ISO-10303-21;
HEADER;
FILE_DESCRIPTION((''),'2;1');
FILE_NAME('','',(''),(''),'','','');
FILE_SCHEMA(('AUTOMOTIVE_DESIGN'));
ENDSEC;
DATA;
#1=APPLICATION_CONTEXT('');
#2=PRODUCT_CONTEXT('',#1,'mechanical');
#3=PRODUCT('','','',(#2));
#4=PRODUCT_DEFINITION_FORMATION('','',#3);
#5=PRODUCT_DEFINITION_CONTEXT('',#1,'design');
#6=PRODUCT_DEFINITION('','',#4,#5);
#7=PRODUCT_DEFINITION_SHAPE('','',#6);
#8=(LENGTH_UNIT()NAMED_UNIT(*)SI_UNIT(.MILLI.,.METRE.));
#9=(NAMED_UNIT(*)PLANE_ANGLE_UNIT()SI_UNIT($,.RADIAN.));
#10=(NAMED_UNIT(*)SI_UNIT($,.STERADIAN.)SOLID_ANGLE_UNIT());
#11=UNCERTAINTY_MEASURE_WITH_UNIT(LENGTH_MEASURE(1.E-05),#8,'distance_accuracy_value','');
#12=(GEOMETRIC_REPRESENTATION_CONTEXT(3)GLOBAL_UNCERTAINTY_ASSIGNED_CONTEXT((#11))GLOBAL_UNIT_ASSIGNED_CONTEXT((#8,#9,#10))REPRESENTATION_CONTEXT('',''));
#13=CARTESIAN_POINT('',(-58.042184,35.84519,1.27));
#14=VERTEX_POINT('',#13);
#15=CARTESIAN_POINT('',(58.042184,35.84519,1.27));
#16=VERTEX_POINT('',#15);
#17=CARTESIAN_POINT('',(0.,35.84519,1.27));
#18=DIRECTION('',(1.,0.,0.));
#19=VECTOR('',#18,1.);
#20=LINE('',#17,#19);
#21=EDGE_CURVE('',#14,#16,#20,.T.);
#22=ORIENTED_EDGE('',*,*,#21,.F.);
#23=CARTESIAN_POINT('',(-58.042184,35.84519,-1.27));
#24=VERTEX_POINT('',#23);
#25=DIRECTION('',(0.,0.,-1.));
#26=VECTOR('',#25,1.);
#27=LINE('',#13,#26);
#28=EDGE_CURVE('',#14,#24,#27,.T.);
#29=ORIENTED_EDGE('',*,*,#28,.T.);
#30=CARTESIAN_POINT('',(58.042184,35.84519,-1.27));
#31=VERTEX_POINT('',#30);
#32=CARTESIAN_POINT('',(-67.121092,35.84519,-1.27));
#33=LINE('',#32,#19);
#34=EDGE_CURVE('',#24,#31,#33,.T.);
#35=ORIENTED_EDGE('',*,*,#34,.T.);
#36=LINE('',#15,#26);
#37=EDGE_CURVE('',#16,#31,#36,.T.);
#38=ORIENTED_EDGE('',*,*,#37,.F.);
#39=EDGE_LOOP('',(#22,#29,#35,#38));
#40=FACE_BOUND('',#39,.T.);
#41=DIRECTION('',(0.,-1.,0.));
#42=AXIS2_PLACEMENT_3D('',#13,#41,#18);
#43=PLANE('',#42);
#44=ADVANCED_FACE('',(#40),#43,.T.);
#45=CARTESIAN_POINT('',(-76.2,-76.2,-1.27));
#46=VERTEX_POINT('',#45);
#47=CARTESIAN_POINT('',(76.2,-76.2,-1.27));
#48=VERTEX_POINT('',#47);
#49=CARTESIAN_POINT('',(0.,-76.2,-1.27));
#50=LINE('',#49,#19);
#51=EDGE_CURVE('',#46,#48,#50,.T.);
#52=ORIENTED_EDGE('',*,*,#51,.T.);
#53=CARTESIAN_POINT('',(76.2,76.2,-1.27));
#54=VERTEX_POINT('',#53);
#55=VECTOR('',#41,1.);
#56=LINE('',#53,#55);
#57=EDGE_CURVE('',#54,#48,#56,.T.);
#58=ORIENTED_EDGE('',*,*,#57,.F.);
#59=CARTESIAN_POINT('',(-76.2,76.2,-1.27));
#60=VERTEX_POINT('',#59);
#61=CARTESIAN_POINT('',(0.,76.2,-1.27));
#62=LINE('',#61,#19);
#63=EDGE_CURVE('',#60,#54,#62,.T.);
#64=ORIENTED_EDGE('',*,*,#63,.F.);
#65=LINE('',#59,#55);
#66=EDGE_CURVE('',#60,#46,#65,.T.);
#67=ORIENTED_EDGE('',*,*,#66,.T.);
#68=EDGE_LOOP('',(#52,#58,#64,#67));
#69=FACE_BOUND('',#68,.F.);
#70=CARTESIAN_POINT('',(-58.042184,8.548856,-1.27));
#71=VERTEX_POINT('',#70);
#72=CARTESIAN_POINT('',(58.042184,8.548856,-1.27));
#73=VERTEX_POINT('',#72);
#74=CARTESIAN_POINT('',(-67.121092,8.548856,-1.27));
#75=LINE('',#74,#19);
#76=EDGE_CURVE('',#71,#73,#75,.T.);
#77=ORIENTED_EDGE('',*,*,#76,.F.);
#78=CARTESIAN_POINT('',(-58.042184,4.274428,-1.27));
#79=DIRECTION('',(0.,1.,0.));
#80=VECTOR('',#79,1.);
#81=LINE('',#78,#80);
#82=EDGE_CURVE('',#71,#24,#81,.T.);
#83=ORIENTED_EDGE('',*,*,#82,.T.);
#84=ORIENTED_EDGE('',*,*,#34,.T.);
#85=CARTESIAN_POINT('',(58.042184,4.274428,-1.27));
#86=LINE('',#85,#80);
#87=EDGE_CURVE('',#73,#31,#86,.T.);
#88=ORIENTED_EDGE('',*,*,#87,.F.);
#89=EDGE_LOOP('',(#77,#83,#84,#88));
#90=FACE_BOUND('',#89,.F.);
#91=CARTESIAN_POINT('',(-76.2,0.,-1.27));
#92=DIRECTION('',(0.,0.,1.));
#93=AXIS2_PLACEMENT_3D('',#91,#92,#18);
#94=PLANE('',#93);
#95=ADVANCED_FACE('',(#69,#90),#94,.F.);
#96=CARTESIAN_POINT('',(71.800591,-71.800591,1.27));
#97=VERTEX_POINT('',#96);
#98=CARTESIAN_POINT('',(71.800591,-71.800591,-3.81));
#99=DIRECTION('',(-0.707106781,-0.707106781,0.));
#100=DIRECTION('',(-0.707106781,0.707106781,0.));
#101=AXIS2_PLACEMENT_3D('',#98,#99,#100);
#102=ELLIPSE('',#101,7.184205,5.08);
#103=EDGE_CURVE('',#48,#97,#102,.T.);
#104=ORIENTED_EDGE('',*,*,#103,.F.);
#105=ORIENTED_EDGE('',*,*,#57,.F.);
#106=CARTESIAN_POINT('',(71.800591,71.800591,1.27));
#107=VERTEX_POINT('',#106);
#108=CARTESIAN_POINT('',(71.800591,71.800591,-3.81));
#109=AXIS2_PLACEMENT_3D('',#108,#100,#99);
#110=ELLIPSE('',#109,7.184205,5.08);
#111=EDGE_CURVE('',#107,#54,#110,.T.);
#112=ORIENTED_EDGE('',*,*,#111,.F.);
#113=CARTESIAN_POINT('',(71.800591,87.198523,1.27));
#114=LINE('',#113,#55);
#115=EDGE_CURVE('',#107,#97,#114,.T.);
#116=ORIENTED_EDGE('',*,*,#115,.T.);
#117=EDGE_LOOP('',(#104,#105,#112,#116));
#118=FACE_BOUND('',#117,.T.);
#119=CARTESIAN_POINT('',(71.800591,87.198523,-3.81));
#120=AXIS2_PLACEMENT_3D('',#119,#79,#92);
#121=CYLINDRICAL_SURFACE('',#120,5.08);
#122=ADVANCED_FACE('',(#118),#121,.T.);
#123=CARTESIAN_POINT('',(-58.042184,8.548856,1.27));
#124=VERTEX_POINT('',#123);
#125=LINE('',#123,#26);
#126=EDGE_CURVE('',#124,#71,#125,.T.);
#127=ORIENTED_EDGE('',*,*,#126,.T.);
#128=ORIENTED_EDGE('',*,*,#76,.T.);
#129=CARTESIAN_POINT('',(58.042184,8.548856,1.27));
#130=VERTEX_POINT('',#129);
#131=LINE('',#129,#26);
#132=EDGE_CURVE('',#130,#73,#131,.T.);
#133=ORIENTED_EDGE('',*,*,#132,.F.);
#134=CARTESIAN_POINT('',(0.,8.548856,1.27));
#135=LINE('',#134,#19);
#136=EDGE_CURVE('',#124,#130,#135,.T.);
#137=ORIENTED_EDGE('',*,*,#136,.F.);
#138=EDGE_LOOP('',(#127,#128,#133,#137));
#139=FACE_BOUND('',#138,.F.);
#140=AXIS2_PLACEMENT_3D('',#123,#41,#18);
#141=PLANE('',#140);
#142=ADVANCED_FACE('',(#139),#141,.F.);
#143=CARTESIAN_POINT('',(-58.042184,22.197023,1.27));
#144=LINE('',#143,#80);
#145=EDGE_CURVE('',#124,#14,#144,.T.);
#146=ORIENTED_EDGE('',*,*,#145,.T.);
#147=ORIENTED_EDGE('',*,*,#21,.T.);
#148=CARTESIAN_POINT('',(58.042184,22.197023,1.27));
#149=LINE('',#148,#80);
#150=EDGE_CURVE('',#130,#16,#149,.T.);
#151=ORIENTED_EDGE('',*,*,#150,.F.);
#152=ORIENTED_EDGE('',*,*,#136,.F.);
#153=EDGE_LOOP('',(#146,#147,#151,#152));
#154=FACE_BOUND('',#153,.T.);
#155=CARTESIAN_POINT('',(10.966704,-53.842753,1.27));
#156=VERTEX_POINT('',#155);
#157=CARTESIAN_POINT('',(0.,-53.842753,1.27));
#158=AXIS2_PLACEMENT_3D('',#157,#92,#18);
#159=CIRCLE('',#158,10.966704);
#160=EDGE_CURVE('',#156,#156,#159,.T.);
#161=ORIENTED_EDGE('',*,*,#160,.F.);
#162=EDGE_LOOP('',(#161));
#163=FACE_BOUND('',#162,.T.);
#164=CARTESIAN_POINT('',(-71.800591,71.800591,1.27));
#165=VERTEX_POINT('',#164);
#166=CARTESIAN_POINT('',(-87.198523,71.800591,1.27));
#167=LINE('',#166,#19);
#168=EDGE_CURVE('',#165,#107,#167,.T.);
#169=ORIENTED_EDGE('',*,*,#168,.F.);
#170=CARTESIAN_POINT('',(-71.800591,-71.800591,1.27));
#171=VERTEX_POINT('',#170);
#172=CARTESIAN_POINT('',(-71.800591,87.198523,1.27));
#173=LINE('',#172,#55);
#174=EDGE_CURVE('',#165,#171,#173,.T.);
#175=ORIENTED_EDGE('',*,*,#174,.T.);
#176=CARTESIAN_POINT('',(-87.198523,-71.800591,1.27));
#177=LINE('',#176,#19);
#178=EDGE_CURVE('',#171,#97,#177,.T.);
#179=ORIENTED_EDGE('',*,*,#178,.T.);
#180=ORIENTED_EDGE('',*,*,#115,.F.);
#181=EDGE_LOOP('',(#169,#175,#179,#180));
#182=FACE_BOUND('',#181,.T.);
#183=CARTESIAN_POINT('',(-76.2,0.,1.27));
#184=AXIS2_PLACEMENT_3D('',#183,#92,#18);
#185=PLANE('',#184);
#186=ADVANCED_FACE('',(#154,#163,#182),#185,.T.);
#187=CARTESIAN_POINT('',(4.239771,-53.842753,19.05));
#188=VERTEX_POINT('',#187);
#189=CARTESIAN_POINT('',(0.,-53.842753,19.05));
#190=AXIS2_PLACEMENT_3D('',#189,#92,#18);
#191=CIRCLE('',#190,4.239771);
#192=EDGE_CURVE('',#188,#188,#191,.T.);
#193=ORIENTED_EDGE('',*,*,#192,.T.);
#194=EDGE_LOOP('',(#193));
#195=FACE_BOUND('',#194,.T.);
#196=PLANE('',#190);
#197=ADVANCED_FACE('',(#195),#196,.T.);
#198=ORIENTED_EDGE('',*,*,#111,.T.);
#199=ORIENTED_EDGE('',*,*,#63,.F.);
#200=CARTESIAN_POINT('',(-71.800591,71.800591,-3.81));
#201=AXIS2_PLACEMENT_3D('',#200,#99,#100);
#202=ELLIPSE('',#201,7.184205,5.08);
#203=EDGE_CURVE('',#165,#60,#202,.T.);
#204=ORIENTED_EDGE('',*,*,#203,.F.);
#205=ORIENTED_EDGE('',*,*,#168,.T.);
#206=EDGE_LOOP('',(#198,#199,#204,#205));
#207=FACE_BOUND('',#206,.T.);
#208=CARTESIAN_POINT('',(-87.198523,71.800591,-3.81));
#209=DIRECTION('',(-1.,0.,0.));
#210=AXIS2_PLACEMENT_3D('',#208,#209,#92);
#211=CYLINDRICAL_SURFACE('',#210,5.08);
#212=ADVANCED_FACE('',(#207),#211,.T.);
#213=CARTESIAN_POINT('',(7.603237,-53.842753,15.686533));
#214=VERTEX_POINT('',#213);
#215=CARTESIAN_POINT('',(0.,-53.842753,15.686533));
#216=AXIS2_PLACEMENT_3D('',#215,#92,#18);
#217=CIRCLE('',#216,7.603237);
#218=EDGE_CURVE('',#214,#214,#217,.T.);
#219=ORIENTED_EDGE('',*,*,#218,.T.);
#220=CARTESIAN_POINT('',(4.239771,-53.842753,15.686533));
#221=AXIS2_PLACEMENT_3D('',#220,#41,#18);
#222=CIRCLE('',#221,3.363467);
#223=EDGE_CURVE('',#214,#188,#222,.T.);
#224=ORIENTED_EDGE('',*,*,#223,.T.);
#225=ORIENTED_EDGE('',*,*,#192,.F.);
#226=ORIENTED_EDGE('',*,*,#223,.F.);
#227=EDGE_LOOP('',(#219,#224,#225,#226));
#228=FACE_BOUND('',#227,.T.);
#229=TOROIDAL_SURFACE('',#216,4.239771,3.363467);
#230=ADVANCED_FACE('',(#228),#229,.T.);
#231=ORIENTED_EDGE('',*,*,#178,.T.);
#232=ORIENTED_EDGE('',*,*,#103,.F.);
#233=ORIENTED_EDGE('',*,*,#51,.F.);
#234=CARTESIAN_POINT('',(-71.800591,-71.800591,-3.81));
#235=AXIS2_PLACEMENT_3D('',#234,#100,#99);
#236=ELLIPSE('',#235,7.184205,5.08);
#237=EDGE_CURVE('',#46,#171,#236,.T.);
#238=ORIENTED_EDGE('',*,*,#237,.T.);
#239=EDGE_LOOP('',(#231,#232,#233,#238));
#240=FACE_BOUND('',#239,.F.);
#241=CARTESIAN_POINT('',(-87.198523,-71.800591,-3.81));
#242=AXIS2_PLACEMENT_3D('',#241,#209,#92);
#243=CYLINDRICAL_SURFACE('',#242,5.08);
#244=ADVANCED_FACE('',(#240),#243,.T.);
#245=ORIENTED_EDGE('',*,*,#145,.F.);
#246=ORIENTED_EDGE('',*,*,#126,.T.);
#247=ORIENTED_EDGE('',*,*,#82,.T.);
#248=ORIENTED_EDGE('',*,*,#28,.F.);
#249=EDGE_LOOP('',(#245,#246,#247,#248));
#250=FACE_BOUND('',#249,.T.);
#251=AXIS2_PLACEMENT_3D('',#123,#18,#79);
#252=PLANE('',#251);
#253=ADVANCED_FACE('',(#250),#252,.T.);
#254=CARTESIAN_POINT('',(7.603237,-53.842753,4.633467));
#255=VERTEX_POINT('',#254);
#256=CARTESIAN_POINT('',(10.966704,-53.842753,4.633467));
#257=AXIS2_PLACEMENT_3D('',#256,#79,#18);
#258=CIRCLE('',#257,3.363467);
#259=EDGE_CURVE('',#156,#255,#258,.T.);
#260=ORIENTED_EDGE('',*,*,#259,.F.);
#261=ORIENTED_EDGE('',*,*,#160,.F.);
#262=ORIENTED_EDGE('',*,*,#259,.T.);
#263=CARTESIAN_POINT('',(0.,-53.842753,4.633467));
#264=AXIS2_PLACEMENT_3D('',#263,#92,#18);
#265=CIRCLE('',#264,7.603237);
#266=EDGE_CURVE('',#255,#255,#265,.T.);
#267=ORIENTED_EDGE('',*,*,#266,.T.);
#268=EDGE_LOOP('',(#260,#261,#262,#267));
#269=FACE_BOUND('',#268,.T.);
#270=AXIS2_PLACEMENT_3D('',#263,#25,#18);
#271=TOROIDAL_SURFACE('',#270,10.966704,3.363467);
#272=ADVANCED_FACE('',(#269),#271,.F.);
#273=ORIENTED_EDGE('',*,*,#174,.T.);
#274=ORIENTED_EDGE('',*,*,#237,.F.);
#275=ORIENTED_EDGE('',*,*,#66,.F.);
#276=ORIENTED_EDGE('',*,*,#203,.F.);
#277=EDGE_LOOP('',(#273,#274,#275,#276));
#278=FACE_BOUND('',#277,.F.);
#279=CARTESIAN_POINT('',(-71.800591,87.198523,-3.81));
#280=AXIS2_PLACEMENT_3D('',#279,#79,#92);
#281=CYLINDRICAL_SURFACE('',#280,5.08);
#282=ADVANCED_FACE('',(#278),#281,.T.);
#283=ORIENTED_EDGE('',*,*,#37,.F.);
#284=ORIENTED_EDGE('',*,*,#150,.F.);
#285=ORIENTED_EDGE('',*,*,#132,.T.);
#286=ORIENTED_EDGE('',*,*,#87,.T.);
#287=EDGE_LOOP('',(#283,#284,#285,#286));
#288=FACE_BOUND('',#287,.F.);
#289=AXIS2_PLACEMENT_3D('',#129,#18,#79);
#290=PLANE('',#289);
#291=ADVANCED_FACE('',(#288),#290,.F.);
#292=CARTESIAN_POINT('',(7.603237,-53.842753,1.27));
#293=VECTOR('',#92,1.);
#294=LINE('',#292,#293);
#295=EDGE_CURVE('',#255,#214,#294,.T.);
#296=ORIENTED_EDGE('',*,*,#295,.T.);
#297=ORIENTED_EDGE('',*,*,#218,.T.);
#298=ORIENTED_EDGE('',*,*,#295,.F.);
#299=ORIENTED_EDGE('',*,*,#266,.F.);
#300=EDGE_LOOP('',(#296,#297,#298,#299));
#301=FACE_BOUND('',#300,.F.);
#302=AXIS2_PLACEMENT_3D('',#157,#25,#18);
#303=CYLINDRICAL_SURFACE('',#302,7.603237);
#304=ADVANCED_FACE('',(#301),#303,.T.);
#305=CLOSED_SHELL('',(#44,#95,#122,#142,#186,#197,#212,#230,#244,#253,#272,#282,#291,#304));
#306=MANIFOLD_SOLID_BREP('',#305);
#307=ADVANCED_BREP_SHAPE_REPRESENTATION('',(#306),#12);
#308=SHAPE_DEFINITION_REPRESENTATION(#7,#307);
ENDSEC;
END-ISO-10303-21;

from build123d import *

# Parameters (mm, degrees)
F0_W          = 152.4
F0_H          = 2.54
F1_DEPTH      = 76.2
F1_DEPTH_BACK = 76.2
F2_W          = 116.0843670368
F2_H          = 27.2963345051
F3_DEPTH      = 25.4
F4_R          = 7.6032374963
F5_DEPTH      = 17.78
F6_R          = 3.3634669128
F7_T1_DEPTH   = 174.3970452561
F7_T3_DEPTH   = 174.3970452561


# Not quite as in the source:
# - a fillet or chamfer that OpenCascade refuses, or shapes differently, is made with other operations: its cross-section is extruded or revolved along the edge and cut away or added


with BuildPart() as f1:
    # F0 (on Front) → F1 (new body, two sides)
    with BuildSketch(Plane.XZ) as f1_sk:
        Rectangle(F0_W, F0_H)
    extrude(amount=-F1_DEPTH)
    extrude(f1_sk.sketch, amount=F1_DEPTH_BACK)

    # F2 (on face) → F3 (cut)
    with BuildSketch(Plane.XY.offset(1.27)):
        with Locations((0, 22.1970230341)):
            Rectangle(F2_W, F2_H)
    extrude(amount=-F3_DEPTH, mode=Mode.SUBTRACT)

    # F4 (on face) → F5 (join)
    with BuildSketch(Plane.XY.offset(1.27)):
        with Locations((0, -53.8427531719)):
            Circle(F4_R)
    extrude(amount=F5_DEPTH)

    # F6
    f6_edges = [f1.edges().sort_by_distance(p)[0] for p in [
        (7.603237, -53.842753, 10.16),
        (-7.603237, -53.842753, 1.27),
        (-7.603237, -53.842753, 19.05),
    ]]
    fillet(f6_edges, radius=F6_R)

    # F7: fillet of radius 5.08 on 4 edges, made by hand

    # F7_s2 → F7_t1 (cut)
    with BuildSketch(Plane.YZ.offset(-87.1985226281)):
        with BuildLine():
            ThreePointArc((-71.8005909488, 1.27), (-74.3405909488, 0.5894090512), (-76.2, -1.27))
            Line((-76.2, -1.27), (-76.2, 1.27))
            Line((-76.2, 1.27), (-71.8005909488, 1.27))
        make_face()
        with BuildLine():
            ThreePointArc((71.8005909488, 1.27), (74.3405909488, 0.5894090512), (76.2, -1.27))
            Line((76.2, -1.27), (76.2, 1.27))
            Line((76.2, 1.27), (71.8005909488, 1.27))
        make_face()
    extrude(amount=F7_T1_DEPTH, mode=Mode.SUBTRACT)

    # F7_s4 → F7_t3 (cut)
    with BuildSketch(Plane.XZ.offset(-87.1985226281)):
        with BuildLine():
            ThreePointArc((71.8005909488, 1.27), (74.3405909488, 0.5894090512), (76.2, -1.27))
            Line((76.2, -1.27), (76.2, 1.27))
            Line((76.2, 1.27), (71.8005909488, 1.27))
        make_face()
        with BuildLine():
            ThreePointArc((-71.8005909488, 1.27), (-74.3405909488, 0.5894090512), (-76.2, -1.27))
            Line((-76.2, -1.27), (-76.2, 1.27))
            Line((-76.2, 1.27), (-71.8005909488, 1.27))
        make_face()
    extrude(amount=F7_T3_DEPTH, mode=Mode.SUBTRACT)


solid = f1.part
